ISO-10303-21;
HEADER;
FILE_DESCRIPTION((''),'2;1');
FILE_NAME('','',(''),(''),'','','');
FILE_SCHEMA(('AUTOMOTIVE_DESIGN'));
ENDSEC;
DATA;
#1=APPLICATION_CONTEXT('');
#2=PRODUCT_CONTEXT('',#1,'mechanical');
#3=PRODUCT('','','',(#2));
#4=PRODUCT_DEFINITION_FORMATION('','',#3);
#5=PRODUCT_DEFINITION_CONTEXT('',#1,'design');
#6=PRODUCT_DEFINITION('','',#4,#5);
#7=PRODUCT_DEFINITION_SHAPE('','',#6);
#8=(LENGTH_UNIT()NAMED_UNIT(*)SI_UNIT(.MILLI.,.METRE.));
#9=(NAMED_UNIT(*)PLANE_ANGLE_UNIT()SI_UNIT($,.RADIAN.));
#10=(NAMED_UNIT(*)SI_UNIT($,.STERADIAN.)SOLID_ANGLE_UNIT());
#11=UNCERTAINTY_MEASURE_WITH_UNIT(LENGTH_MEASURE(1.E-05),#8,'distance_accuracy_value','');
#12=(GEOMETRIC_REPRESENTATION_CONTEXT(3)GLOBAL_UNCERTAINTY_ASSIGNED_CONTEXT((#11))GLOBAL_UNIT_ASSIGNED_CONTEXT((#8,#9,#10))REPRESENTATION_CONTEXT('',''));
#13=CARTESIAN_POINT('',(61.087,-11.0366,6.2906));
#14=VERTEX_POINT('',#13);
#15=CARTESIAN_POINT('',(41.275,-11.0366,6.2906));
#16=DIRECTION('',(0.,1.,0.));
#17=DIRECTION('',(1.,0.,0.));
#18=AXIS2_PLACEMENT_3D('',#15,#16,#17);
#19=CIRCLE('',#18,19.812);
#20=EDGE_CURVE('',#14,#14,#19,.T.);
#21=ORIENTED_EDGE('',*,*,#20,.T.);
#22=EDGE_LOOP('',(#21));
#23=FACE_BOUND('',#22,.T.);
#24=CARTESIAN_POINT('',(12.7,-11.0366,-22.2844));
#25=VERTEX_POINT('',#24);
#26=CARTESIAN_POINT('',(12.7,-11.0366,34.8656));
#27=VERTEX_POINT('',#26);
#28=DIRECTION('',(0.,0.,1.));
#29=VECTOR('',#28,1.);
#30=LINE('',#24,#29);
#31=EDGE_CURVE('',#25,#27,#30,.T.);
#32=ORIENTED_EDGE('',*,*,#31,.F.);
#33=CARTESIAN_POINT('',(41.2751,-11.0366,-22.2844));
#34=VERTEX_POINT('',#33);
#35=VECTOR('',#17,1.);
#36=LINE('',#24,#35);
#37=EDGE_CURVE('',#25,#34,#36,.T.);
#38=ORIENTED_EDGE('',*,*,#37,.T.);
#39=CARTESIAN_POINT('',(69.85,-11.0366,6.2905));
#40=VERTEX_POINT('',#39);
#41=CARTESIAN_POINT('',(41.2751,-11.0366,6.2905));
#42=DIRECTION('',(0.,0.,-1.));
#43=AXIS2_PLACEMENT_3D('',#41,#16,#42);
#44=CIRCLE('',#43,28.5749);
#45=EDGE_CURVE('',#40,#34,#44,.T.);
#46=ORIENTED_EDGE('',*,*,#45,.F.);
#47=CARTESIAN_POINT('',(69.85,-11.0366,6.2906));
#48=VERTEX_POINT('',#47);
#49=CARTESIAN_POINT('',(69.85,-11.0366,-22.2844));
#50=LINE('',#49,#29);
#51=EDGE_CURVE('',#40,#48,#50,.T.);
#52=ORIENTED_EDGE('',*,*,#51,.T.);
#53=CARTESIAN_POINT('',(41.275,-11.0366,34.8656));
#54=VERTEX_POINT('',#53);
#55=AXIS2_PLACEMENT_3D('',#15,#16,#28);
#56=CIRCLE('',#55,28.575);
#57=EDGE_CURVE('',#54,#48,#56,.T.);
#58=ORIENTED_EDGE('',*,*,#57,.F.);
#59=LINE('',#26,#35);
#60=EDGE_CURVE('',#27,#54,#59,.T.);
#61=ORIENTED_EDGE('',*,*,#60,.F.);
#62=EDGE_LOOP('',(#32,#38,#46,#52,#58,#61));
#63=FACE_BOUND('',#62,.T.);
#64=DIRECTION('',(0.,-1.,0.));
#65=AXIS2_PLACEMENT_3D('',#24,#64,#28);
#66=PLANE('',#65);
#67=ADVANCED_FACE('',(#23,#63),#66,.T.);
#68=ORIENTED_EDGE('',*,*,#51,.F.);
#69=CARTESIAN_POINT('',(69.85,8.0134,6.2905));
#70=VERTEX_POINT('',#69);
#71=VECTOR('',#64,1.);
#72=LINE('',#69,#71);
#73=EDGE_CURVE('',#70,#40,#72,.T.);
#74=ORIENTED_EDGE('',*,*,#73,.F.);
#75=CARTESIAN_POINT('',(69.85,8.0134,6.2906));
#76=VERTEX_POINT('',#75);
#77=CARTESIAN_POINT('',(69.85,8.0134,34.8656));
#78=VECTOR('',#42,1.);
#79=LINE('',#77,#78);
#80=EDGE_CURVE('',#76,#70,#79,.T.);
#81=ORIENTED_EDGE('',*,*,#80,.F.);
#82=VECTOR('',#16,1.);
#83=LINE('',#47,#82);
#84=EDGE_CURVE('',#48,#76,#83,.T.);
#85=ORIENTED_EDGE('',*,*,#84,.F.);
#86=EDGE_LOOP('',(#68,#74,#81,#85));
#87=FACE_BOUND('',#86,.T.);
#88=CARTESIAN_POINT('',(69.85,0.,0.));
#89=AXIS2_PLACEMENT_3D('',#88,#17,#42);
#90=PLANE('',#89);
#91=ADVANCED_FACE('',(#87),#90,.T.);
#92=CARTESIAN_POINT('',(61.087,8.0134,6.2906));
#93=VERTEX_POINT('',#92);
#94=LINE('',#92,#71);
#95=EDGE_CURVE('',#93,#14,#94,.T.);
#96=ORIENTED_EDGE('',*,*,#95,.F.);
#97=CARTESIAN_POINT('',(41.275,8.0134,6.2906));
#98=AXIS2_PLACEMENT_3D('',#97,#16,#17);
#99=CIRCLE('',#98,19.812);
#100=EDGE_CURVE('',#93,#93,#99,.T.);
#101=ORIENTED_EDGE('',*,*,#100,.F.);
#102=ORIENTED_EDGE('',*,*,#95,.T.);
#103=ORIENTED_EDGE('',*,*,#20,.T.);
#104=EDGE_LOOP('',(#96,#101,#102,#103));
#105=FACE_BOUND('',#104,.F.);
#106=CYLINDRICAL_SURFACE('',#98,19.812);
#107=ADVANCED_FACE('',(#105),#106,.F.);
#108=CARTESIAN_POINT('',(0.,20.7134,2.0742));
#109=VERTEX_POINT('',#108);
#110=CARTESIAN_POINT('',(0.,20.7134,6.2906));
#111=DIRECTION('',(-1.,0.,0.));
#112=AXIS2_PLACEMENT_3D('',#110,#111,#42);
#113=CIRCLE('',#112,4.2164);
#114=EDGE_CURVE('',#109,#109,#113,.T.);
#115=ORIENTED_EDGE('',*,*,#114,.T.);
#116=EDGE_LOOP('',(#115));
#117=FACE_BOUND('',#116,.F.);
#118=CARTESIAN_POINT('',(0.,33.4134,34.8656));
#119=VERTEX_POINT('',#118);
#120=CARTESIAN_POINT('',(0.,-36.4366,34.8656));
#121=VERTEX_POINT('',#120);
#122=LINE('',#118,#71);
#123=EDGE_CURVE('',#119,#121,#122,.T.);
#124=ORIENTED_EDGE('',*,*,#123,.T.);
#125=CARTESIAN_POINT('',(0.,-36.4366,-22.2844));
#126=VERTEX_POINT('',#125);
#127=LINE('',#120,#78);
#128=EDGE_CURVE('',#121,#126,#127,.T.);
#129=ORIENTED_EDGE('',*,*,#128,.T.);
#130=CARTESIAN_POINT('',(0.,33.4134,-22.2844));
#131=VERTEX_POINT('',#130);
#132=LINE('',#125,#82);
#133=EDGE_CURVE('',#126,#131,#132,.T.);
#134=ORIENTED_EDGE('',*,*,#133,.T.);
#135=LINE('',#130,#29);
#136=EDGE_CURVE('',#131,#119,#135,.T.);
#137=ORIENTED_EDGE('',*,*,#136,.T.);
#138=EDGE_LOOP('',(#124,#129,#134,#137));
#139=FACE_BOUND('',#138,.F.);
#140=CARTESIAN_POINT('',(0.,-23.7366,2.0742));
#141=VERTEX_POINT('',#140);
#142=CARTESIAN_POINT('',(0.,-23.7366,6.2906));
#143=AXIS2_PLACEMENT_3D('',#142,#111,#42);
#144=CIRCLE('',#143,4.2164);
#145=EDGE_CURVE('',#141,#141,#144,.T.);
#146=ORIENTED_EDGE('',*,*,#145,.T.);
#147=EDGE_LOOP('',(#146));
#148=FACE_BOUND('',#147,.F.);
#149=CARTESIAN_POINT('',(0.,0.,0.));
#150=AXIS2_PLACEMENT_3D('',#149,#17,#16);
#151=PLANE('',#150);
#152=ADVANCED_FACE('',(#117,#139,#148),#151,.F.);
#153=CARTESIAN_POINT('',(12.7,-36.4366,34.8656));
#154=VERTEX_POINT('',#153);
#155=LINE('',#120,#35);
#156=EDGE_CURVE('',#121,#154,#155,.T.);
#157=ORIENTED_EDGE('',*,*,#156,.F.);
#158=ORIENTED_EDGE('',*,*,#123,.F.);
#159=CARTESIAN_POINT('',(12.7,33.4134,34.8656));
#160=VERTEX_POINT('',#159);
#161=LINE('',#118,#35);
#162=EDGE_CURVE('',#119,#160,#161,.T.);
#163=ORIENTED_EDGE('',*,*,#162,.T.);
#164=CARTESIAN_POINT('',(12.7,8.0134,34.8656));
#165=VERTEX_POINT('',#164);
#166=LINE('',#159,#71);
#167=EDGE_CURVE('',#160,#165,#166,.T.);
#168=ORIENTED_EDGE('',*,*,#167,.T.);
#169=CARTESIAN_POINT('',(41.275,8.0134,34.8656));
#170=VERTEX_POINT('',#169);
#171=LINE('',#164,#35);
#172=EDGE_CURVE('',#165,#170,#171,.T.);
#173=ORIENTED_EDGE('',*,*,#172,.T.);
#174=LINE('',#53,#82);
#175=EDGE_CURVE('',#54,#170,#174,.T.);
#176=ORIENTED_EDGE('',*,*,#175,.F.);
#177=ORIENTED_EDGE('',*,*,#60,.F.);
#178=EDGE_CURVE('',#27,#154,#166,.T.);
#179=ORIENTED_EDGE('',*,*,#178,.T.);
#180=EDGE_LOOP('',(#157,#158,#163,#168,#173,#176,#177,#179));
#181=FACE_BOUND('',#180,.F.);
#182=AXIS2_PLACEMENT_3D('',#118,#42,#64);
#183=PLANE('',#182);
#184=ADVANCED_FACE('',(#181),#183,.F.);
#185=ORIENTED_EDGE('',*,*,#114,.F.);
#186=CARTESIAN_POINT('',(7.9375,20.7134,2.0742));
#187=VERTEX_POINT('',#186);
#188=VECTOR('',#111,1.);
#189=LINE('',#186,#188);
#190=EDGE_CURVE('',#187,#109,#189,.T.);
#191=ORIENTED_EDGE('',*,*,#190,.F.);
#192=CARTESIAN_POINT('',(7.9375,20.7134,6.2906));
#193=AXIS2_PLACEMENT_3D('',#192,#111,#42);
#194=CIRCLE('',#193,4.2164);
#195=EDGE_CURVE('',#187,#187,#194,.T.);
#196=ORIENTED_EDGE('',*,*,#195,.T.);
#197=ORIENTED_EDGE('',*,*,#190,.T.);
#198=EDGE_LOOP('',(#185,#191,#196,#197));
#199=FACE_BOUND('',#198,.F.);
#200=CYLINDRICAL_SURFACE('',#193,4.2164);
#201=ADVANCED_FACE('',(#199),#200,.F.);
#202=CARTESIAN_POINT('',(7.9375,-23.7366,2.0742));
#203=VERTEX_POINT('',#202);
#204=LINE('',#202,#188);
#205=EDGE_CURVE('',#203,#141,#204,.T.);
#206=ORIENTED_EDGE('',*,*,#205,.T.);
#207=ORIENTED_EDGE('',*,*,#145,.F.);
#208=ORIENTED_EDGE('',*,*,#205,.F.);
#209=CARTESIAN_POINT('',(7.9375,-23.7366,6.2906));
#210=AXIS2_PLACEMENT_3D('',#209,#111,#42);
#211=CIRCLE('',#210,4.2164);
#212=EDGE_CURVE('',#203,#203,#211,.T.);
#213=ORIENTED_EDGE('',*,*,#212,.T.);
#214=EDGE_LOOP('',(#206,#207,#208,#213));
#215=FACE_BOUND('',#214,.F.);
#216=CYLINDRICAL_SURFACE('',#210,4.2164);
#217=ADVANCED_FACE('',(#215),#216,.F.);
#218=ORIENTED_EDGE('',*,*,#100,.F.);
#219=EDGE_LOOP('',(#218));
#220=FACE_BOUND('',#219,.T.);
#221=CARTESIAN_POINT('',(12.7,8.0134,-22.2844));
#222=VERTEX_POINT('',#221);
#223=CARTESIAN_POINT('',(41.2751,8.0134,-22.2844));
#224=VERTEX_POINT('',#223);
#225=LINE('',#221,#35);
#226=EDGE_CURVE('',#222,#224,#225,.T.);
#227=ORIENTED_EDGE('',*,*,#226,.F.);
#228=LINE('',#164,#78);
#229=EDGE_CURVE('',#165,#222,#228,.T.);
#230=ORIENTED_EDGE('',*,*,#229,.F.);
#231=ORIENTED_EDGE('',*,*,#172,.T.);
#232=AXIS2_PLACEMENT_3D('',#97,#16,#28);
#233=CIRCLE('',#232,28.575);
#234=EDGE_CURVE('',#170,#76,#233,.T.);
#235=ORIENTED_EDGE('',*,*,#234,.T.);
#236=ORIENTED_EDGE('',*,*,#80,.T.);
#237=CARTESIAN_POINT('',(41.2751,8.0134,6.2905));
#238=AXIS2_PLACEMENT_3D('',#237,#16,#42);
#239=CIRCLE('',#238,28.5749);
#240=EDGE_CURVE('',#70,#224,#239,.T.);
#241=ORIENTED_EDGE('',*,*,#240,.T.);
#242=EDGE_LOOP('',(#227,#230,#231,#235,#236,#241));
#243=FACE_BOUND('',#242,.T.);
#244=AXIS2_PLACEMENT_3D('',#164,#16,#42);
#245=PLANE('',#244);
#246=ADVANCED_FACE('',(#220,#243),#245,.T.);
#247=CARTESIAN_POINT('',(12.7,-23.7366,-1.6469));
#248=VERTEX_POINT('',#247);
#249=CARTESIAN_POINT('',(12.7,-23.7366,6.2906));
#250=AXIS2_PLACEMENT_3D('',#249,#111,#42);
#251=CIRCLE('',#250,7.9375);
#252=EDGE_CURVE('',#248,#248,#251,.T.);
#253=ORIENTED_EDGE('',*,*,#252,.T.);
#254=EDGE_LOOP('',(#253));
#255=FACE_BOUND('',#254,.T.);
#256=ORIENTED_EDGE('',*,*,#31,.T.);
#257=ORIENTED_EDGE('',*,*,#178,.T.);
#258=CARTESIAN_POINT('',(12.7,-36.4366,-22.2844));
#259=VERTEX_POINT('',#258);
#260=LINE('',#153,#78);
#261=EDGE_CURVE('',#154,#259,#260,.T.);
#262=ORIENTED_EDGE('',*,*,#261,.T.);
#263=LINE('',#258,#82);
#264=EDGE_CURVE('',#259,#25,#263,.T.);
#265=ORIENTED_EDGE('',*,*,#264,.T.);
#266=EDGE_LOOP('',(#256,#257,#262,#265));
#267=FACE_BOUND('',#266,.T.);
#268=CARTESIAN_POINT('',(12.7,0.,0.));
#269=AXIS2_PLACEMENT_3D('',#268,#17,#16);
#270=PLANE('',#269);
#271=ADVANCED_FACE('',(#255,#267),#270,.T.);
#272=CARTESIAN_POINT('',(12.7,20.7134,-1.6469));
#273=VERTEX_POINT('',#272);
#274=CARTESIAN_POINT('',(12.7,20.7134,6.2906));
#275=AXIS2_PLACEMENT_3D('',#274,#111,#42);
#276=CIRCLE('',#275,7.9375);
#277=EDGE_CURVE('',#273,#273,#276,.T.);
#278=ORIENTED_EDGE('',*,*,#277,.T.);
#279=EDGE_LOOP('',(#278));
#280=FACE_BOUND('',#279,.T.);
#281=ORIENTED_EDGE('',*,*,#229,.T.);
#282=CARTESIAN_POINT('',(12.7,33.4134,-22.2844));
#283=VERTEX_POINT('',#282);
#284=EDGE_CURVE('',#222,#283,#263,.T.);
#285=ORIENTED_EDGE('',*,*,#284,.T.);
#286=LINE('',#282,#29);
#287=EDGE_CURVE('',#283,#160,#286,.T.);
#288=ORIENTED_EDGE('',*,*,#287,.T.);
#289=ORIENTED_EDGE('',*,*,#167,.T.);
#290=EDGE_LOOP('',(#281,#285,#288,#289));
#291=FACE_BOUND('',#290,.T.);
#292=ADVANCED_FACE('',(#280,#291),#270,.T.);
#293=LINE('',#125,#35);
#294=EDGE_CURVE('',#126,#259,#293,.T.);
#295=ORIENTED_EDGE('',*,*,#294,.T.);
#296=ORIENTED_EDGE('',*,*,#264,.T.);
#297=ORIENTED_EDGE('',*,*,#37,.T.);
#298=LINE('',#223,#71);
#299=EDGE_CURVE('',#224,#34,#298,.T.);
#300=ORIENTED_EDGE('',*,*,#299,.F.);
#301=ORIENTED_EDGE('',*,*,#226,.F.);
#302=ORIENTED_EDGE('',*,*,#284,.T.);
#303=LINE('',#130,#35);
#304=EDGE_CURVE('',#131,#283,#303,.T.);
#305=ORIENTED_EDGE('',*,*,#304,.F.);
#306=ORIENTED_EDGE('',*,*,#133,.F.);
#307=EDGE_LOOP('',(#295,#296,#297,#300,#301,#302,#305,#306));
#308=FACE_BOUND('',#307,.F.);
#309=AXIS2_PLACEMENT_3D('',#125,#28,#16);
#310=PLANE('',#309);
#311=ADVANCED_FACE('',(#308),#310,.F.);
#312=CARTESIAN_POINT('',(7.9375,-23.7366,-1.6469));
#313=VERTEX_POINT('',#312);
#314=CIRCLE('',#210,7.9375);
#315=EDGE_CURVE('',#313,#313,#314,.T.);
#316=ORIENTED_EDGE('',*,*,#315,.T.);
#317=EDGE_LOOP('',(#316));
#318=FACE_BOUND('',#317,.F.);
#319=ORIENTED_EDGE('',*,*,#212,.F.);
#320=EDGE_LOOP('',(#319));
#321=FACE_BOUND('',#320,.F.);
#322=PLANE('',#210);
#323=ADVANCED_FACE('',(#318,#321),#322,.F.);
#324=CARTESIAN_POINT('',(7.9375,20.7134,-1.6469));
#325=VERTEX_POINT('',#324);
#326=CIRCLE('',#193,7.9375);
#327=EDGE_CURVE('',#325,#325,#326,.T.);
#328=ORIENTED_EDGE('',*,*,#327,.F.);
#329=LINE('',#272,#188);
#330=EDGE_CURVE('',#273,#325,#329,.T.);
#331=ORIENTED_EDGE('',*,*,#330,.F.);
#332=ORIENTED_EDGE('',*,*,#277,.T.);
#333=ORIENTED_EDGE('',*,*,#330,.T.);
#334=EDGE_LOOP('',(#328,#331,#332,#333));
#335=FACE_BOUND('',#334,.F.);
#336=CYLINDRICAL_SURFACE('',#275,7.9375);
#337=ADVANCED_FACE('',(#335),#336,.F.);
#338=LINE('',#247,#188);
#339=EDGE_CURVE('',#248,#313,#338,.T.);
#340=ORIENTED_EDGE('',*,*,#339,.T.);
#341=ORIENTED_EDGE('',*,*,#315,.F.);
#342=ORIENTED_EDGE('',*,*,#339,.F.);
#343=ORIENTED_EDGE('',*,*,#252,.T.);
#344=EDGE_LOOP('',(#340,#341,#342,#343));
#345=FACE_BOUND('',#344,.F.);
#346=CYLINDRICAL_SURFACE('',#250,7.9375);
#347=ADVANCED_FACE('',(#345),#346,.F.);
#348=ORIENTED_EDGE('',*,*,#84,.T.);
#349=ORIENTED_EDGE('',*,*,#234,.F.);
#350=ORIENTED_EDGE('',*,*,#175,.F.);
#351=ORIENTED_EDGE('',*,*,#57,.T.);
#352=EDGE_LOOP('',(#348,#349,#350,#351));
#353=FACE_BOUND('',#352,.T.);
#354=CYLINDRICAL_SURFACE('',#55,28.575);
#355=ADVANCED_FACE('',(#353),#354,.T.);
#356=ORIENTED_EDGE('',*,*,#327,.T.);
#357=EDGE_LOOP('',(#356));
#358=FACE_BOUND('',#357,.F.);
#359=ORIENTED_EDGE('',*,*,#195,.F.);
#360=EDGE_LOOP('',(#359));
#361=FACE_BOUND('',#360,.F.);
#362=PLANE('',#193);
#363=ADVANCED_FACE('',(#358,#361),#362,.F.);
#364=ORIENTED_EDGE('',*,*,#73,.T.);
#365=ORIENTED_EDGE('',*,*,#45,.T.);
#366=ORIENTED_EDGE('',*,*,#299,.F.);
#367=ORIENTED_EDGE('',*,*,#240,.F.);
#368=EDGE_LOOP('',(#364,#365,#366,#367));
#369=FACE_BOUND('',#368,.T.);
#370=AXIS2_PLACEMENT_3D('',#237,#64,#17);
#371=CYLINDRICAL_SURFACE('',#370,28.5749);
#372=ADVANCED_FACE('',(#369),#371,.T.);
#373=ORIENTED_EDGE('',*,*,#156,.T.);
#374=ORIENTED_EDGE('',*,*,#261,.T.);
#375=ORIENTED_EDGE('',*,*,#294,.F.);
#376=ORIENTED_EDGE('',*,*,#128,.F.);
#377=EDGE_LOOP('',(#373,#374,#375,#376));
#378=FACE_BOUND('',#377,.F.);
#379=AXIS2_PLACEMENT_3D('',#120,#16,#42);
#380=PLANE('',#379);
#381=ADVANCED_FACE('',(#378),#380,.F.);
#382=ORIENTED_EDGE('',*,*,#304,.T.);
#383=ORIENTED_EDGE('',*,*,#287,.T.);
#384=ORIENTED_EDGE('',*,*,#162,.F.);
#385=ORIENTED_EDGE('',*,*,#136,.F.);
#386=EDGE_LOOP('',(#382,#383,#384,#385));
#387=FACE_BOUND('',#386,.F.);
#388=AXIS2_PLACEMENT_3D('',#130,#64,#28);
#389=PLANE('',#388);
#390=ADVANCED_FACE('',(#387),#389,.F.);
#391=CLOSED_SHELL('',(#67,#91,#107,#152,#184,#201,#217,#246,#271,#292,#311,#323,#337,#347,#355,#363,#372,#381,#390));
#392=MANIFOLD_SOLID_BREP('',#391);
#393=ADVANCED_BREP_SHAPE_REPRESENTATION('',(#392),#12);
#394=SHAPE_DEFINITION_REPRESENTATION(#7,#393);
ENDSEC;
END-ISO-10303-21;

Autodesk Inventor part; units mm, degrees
ref_plane "YZ Plane" through (0, 0, 0) normal (1, 0, 0) x (0, 1, 0)
ref_plane "XZ Plane" through (0, 0, 0) normal (0, 1, 0) x (-1, 0, 0)
ref_plane "XY Plane" through (0, 0, 0) normal (0, 0, 1) x (1, 0, 0)
sketch "Sketch1" plane through (0, 0, 0) normal (1, 0, 0) x (0, 1, 0)
  line L0 (33.4134, 34.8656) -> (-36.4366, 34.8656)
  line L1 (-36.4366, 34.8656) -> (-36.4366, -22.2844)
  line L2 (-36.4366, -22.2844) -> (33.4134, -22.2844)
  line L3 (33.4134, -22.2844) -> (33.4134, 34.8656)
  point P0 (0, 0)
  dimension "d0" = 57.15
  dimension "d1" = 69.85
extrude "Extrusion1" add sketch "Sketch1" along normal blind 12.7
sketch "Sketch2" plane through (12.7, 0, 0) normal (1, 0, 0) x (0, 0, -1)
  line L0 (-34.8656, 8.0134) -> (22.2844, 8.0134)
  line L1 (22.2844, 8.0134) -> (22.2844, -11.0366)
  line L2 (22.2844, -11.0366) -> (-34.8656, -11.0366)
  line L3 (-34.8656, -11.0366) -> (-34.8656, 8.0134)
  line L4 (22.2844, -36.4366) -> (22.2844, 33.4134) projected
  line L5 (-34.8656, 33.4134) -> (-34.8656, -36.4366) projected
  line L6 (22.2844, 33.4134) -> (-34.8656, 33.4134) projected
  point P0 (0, 0)
  dimension "d5" = 0
  dimension "d9" = 57.15
  dimension "d16" = 19.05
  dimension "d17" = 25.4
extrude "Extrusion2" add sketch "Sketch2" along normal blind 57.15 contours L0 L1 L2 L3
fillet "Fillet1" radius 28.575 1 edges at (69.85, -1.5116, 34.8656)
fillet "Fillet2" radius 28.575 1 edges at (69.85, -1.5116, -22.2844)
sketch "Sketch3" plane through (12.7, 8.0134, 34.8656) normal (0, 1, 0) x (1, 0, 0)
  circle A0 centre (28.575, 28.575) radius 19.812
  line L0 (0, 0) -> (28.575, 0) projected
  line L1 (0, 57.15) -> (0, 0) projected
  point P0 (-12.7, 34.8656)
  dimension "d11" = 39.624
  dimension "d12" = 28.575
  dimension "d13" = 28.575
extrude "Extrusion3" cut sketch "Sketch3" against normal blind 50.8
sketch "Sketch4" plane through (12.7, 0, 0) normal (1, 0, 0) x (0, 0, -1)
  point P0 (0, 0)
sketch "Sketch5" plane through (12.7, 0, 0) normal (1, 0, 0) x (0, 0, -1)
  line L0 (22.2844, -36.4366) -> (22.2844, 33.4134) projected
  line L1 (22.2844, 33.4134) -> (-34.8656, 33.4134) projected
  point P0 (0, 0)
  point P1 (-6.2906, 20.7134)
  dimension "d25" = 28.575
  dimension "d35" = 12.7
hole "Hole1" at (12.7, 20.7134, 6.2906) direction (-1, 0, 0) diameter 8.4328 end through all counterbore diameter 15.875 counterbore depth 4.7625 clearance for "Socket Head Cap Screw" size "5/16" standard "Ansi Unified Screw Threads"
sketch "Sketch6" plane through (12.7, 0, 0) normal (1, 0, 0) x (0, 0, -1)
  line L0 (22.2844, -36.4366) -> (22.2844, 33.4134) projected
  line L1 (-34.8656, -36.4366) -> (22.2844, -36.4366) projected
  point P0 (0, 0)
  point P1 (-6.2906, -23.7366)
  dimension "d33" = 28.575
  dimension "d34" = 12.7
hole "Hole2" at (12.7, -23.7366, 6.2906) direction (-1, 0, 0) diameter 8.4328 end through all counterbore diameter 15.875 counterbore depth 4.7625 clearance for "Socket Head Cap Screw" size "5/16" standard "Ansi Unified Screw Threads"
properties part number "Organic Filter Holder"
